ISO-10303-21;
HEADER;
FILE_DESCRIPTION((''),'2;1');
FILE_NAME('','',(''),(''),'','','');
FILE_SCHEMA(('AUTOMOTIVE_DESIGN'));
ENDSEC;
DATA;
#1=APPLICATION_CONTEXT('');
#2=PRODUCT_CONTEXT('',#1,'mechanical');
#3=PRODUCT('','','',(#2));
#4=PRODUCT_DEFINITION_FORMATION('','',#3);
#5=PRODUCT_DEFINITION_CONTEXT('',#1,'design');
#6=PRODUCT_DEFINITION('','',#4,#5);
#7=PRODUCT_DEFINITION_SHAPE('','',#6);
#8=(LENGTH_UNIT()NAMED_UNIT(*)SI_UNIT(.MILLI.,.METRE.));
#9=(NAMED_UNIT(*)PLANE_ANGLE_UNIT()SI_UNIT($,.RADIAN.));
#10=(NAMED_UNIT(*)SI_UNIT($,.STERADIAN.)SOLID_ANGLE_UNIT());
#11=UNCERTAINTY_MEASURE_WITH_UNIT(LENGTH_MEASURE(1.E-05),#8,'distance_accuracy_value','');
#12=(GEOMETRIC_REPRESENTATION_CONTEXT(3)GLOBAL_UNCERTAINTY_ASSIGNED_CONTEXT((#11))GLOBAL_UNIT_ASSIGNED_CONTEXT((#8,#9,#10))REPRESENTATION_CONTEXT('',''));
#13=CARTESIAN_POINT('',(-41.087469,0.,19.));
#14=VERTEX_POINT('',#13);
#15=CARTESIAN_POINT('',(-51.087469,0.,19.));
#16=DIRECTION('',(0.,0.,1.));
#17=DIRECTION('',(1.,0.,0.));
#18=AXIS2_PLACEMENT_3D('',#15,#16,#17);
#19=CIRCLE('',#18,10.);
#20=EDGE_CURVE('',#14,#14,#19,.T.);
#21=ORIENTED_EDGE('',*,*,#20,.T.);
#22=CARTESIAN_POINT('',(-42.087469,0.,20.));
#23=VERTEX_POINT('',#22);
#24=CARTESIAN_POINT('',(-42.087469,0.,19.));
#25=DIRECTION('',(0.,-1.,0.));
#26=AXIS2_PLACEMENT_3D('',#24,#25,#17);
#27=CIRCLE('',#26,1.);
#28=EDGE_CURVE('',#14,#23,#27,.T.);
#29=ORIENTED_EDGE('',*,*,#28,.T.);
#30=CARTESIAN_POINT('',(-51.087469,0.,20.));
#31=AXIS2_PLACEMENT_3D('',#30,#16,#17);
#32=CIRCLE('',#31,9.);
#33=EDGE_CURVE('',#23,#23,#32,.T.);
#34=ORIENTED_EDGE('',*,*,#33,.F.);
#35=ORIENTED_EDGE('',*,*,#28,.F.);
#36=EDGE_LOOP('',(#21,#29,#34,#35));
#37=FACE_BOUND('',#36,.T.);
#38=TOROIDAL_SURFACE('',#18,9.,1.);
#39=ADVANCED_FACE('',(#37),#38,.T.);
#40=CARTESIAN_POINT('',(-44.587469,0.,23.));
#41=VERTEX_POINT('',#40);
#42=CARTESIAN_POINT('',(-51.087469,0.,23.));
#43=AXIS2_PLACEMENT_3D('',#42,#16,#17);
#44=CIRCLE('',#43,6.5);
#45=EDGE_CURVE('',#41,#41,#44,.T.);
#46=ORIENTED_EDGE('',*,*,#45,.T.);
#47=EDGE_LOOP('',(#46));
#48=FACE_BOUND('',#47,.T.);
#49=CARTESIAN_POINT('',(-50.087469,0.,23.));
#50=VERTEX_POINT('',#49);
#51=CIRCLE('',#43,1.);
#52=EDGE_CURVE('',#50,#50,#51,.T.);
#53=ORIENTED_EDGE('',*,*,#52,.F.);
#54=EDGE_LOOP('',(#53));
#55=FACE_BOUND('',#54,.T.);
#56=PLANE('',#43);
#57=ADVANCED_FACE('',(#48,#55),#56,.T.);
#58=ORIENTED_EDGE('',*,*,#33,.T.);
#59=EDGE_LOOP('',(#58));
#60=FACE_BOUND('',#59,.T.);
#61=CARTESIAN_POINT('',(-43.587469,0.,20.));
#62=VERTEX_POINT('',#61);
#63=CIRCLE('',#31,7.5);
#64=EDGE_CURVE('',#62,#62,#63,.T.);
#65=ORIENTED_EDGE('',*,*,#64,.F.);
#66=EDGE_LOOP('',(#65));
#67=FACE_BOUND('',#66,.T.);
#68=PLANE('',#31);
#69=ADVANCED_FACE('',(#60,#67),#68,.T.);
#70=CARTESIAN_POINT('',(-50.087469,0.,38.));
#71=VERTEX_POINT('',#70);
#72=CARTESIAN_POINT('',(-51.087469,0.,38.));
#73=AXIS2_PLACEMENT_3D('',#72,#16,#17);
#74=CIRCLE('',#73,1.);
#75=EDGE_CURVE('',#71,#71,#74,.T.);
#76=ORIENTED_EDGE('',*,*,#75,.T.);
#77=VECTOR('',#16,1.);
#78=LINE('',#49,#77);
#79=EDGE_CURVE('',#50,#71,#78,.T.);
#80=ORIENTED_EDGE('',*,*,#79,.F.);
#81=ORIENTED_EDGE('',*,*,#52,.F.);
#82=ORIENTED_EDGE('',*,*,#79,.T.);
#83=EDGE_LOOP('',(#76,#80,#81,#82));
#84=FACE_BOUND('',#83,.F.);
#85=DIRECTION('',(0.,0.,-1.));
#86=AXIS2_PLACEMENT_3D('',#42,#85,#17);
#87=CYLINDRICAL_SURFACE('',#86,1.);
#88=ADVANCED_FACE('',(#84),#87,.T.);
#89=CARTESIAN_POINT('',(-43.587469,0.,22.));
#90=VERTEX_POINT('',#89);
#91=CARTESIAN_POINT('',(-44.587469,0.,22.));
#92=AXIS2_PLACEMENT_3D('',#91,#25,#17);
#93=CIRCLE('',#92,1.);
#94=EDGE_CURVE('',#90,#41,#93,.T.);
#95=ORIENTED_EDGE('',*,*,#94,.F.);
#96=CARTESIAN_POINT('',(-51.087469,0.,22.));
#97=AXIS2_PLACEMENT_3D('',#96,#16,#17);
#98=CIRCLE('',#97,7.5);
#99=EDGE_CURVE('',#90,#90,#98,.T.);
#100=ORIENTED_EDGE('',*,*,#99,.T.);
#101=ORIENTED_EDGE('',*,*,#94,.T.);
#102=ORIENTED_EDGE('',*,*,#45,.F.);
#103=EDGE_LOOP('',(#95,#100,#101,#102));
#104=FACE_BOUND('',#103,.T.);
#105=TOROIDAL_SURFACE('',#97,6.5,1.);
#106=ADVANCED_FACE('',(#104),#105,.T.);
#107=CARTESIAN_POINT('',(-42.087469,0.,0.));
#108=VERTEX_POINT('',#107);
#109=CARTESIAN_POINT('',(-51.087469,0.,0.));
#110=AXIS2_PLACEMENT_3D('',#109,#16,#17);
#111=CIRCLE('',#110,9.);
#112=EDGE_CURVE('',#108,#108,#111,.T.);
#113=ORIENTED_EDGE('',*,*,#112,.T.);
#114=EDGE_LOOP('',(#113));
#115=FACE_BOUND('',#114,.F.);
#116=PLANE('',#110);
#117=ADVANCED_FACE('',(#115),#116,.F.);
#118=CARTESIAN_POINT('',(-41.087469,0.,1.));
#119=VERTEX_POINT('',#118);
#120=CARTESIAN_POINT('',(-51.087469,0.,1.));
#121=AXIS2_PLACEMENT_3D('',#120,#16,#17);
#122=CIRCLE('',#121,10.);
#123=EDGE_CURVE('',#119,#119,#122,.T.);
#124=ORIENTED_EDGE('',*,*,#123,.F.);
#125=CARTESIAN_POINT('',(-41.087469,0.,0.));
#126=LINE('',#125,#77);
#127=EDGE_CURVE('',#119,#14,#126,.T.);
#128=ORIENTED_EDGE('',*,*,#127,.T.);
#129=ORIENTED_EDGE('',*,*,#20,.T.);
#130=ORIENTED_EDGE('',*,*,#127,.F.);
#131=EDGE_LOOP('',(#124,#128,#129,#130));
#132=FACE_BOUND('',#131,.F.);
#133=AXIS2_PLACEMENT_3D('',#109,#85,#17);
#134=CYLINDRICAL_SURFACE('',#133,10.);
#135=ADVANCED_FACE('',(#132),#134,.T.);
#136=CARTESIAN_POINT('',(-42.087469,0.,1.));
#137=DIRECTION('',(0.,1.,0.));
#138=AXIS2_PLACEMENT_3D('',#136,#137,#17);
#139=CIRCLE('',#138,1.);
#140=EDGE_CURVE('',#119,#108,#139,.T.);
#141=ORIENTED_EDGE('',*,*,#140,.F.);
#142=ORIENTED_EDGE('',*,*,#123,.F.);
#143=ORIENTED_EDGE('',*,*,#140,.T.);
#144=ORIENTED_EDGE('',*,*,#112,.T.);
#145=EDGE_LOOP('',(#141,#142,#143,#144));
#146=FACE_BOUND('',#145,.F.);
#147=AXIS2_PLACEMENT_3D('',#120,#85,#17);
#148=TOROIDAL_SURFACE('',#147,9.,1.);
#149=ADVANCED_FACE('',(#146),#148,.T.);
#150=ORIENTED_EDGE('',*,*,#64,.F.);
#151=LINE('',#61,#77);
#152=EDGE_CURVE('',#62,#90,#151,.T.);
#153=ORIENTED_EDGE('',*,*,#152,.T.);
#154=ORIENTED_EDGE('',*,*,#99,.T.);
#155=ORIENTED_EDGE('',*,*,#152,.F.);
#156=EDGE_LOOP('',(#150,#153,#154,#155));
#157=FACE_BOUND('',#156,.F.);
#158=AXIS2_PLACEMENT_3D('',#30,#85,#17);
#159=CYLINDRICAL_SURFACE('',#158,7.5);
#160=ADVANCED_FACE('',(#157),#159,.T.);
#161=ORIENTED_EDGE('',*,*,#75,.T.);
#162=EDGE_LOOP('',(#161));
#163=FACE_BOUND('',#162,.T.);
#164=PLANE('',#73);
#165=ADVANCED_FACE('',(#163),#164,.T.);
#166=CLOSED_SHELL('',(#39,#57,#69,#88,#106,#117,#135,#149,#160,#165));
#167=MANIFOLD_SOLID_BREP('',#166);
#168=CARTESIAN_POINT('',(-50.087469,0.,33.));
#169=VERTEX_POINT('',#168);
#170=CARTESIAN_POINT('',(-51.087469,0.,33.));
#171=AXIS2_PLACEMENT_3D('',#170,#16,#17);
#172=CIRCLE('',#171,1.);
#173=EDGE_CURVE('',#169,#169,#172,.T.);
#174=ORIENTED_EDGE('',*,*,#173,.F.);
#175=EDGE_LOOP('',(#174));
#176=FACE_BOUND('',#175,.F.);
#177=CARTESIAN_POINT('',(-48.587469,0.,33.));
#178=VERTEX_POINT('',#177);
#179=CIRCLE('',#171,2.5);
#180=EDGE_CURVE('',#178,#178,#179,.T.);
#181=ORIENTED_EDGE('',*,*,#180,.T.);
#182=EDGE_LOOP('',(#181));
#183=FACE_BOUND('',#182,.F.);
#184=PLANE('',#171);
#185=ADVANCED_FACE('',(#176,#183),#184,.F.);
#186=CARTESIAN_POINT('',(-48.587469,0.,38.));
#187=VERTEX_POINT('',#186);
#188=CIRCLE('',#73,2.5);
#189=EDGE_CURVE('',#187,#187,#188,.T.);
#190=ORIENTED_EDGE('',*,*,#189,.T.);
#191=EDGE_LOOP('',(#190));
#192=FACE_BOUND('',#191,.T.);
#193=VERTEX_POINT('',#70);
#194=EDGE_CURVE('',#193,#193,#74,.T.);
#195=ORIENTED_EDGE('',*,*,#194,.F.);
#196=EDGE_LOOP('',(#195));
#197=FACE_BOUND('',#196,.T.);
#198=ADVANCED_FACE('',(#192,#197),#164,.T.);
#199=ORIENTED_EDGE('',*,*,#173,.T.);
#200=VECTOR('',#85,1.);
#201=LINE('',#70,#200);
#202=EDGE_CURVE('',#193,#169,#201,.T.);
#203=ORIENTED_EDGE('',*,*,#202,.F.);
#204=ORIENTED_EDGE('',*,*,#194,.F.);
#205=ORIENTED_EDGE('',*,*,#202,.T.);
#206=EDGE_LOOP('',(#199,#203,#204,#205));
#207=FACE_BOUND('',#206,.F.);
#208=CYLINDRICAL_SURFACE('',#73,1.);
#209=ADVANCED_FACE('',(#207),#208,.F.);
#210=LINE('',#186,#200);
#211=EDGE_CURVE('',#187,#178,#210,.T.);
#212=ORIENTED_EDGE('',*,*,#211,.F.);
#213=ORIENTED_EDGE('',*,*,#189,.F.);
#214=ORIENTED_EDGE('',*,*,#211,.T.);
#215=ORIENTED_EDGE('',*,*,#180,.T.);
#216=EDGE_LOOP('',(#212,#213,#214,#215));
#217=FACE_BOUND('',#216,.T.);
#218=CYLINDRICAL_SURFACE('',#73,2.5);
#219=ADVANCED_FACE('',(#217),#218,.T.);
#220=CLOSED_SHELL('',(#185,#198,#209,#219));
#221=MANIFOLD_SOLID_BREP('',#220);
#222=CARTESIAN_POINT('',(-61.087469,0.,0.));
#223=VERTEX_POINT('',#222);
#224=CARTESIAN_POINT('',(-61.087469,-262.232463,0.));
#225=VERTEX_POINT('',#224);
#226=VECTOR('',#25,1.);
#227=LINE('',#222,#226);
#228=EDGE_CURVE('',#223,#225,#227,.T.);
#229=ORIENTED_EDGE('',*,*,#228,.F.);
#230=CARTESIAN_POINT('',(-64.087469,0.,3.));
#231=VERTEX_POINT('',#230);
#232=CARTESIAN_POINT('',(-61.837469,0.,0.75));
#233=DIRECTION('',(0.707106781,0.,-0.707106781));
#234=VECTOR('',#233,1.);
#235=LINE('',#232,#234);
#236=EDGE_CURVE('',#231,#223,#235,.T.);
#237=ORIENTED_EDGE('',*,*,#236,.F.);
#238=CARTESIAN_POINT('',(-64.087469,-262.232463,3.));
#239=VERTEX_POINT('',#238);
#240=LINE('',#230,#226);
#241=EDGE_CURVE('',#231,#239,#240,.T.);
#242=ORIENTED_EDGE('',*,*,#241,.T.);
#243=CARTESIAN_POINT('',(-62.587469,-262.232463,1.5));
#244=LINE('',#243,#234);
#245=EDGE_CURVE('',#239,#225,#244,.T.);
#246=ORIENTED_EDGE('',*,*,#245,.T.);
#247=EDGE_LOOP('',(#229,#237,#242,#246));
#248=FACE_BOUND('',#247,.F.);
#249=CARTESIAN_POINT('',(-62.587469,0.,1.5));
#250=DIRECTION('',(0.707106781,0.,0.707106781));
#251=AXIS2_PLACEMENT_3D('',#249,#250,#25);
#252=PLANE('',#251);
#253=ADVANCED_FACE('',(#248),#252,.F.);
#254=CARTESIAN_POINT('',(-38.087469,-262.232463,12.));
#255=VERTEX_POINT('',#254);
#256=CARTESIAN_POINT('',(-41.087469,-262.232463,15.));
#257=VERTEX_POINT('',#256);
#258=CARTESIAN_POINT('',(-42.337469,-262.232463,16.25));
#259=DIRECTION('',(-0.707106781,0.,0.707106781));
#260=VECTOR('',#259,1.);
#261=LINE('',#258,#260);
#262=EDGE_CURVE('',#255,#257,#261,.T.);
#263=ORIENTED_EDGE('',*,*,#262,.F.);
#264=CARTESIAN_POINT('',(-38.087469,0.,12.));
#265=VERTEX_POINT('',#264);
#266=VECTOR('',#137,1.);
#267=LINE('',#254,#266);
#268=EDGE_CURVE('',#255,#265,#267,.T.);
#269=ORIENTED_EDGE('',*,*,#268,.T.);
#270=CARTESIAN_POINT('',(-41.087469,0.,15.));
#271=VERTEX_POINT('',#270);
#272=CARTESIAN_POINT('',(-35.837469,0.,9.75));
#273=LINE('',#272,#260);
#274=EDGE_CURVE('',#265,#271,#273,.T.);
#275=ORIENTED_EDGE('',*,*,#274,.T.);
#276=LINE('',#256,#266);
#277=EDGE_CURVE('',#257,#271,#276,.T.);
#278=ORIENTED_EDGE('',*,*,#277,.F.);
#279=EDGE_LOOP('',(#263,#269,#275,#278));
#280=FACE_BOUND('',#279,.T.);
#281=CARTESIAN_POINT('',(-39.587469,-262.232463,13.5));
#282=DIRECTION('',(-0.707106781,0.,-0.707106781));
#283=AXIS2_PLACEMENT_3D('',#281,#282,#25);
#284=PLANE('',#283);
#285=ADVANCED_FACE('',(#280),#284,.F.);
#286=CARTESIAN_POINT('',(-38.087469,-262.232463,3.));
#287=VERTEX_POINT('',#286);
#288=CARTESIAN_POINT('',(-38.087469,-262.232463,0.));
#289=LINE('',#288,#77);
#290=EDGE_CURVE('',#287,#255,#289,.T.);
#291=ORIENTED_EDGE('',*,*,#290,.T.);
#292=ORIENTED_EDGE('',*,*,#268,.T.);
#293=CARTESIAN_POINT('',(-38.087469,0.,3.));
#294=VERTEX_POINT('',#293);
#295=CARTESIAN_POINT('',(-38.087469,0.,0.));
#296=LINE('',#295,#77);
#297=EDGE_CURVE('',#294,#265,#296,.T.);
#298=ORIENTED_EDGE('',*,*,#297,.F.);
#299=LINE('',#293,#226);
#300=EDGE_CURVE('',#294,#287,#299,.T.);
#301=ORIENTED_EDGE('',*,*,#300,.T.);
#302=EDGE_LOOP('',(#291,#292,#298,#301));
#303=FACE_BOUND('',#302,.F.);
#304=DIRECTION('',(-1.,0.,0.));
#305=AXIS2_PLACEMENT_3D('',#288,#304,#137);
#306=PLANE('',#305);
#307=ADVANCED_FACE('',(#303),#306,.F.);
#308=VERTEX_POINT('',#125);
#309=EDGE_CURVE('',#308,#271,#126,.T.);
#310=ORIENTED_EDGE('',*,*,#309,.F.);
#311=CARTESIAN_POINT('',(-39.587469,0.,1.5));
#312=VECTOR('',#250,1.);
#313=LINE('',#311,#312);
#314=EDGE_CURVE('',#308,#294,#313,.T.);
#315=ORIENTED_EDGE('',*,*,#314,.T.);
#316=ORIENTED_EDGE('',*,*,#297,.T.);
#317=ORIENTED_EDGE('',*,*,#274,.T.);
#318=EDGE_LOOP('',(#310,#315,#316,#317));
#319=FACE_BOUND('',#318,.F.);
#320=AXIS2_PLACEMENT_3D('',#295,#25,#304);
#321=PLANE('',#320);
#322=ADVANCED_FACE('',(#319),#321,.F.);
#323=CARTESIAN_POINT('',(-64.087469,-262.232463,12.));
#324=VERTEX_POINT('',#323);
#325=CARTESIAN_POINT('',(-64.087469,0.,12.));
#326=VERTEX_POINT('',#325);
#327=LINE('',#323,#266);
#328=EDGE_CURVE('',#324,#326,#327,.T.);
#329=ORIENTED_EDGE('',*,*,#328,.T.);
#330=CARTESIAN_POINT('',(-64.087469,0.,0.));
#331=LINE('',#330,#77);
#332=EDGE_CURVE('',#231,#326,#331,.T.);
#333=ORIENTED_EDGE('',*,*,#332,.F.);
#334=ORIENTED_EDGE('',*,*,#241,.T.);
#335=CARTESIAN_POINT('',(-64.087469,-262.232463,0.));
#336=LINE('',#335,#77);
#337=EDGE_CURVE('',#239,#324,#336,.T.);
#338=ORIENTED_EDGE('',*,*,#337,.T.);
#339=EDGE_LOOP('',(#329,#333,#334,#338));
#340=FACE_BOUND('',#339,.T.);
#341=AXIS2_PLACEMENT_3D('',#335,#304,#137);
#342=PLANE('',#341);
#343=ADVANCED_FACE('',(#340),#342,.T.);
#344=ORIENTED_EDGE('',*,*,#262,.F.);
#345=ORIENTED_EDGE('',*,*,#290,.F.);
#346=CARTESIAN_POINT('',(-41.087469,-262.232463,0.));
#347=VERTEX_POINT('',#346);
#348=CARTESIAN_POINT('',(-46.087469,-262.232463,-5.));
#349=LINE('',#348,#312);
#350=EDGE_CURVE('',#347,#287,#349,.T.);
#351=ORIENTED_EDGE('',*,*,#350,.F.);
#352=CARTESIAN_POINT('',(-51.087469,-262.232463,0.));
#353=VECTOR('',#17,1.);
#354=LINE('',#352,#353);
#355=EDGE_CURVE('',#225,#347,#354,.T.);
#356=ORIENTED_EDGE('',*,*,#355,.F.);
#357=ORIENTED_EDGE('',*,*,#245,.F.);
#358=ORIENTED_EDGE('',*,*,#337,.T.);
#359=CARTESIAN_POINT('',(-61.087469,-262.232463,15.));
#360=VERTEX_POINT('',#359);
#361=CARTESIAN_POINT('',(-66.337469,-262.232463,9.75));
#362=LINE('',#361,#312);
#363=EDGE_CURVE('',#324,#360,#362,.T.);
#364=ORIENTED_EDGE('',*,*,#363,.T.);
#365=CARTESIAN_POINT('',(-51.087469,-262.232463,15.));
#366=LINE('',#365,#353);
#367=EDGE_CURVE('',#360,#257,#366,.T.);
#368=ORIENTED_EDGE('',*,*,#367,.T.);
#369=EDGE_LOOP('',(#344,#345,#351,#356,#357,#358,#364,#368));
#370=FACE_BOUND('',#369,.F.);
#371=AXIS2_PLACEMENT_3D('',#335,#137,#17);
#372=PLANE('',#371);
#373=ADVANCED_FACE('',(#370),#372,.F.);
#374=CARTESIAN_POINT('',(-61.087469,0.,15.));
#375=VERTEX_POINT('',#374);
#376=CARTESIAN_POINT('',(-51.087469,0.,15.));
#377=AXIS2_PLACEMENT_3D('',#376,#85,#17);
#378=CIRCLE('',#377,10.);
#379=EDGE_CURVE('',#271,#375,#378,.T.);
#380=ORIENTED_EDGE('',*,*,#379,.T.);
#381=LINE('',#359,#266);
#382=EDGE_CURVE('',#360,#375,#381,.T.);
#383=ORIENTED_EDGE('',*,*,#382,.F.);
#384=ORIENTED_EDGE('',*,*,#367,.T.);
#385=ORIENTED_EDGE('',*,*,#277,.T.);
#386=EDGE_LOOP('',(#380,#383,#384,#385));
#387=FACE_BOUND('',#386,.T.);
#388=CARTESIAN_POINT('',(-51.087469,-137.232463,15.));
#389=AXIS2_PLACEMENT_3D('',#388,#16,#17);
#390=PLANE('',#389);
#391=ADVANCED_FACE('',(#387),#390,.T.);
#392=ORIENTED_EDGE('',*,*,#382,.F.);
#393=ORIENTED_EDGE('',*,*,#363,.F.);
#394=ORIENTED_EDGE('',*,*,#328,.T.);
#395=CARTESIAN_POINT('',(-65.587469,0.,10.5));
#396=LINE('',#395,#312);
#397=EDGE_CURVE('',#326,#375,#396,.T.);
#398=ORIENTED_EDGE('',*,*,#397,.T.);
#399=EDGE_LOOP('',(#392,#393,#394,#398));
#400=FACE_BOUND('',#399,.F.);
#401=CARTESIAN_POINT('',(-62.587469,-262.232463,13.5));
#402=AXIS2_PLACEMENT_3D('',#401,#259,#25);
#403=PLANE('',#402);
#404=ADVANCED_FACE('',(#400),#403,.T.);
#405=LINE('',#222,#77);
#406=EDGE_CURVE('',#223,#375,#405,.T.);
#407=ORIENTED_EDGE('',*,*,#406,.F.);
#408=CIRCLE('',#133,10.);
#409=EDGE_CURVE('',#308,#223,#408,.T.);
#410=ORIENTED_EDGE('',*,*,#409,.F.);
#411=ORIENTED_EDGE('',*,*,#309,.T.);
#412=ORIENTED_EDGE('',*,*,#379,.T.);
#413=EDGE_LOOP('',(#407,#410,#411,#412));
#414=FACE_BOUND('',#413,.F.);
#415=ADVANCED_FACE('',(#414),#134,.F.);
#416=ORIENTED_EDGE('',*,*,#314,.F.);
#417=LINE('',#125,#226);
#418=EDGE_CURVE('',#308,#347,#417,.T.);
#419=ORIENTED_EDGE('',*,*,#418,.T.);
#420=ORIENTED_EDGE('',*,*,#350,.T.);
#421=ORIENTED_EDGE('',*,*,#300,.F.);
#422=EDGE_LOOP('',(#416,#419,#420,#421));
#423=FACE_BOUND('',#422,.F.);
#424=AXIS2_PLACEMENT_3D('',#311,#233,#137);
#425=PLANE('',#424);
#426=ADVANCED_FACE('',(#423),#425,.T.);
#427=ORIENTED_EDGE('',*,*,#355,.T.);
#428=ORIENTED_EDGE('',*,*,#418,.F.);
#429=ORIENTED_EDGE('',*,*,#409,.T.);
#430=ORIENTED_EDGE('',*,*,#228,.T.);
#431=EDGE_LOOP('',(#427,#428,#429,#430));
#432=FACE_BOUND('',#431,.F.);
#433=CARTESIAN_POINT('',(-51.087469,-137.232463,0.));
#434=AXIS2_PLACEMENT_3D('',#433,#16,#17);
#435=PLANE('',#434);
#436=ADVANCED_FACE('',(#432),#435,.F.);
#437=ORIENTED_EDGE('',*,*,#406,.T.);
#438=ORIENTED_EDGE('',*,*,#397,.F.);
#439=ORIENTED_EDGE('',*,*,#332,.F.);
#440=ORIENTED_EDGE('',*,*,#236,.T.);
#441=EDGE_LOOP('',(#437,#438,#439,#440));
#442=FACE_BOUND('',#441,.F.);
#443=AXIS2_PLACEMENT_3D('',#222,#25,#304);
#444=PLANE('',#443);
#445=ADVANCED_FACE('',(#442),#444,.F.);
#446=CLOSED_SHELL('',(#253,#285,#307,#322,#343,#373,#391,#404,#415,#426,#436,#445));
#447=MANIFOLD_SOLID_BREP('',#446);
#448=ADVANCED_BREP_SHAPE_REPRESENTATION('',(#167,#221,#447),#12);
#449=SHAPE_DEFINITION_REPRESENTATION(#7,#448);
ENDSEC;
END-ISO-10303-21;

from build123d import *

# Parameters (mm, degrees)
F0_R      = 10
F1_DEPTH  = 20
F2_R      = 7.5
F3_DEPTH  = 3
F4_R      = 1
F5_DEPTH  = 15
F6_R      = 2.5
F6_R_2    = 1
F7_DEPTH  = 5
F8_R      = 1
F10_DEPTH = 15
F9_W      = 26
F9_H      = 250
F11_DEPTH = 15
F12_SIZE  = 3


with BuildPart() as f1:
    # F0 (on Top) → F1 (new body)
    with BuildSketch(Plane.XY):
        with Locations((-51.0874686381, 0)):
            Circle(F0_R)
    extrude(amount=F1_DEPTH)

    # F2 (on face) → F3 (join)
    with BuildSketch(Plane.XY.offset(20)):
        with Locations((-51.0874686381, 0)):
            Circle(F2_R)
    extrude(amount=F3_DEPTH)

    # F4 (on face) → F5 (join)
    with BuildSketch(Plane.XY.offset(23)):
        with Locations((-51.0874686381, 0)):
            Circle(F4_R)
    extrude(amount=F5_DEPTH)

    # F8
    f8_edges = [f1.edges().sort_by_distance(p)[0] for p in [
        (-61.087469, 0, 0),
        (-61.087469, 0, 20),
        (-58.587469, 0, 23),
    ]]
    fillet(f8_edges, radius=F8_R)


with BuildPart() as f7:
    # F6 (on face) → F7 (new body)
    with BuildSketch(Plane.XY.offset(38)):
        with Locations((-51.0874686381, 0)):
            Circle(F6_R)
        with Locations((-51.0874686381, 0)):
            Circle(F6_R_2, mode=Mode.SUBTRACT)
    extrude(amount=-F7_DEPTH)


with BuildPart() as f10:
    # F9 (on Top) → F10 (new body)
    with BuildSketch(Plane.XY):
        with BuildLine():
            Line((-38.0874686381, 0), (-41.0874686381, 0))
            ThreePointArc((-41.0874686381, 0), (-51.0874686381, -10), (-61.0874686381, 0))
            Line((-61.0874686381, 0), (-64.0874686381, 0))
            Line((-64.0874686381, 0), (-64.0874686381, -12.2324628755))
            Line((-64.0874686381, -12.2324628755), (-38.0874686381, -12.2324628755))
            Line((-38.0874686381, -12.2324628755), (-38.0874686381, 0))
        make_face()
    extrude(amount=F10_DEPTH)

    # F9 (on Top) → F11 (join)
    with BuildSketch(Plane.XY):
        with Locations((-51.0874686381, -137.2324628755)):
            Rectangle(F9_W, F9_H)
    extrude(amount=F11_DEPTH)

    # F12
    f12_edges = [f10.edges().sort_by_distance(p)[0] for p in [
        (-64.087469, -131.116231, 15),
        (-38.087469, -131.116231, 15),
        (-38.087469, -131.116231, 0),
        (-64.087469, -131.116231, 0),
    ]]
    chamfer(f12_edges, length=F12_SIZE)


solid = Compound([f1.part, f7.part, f10.part])
